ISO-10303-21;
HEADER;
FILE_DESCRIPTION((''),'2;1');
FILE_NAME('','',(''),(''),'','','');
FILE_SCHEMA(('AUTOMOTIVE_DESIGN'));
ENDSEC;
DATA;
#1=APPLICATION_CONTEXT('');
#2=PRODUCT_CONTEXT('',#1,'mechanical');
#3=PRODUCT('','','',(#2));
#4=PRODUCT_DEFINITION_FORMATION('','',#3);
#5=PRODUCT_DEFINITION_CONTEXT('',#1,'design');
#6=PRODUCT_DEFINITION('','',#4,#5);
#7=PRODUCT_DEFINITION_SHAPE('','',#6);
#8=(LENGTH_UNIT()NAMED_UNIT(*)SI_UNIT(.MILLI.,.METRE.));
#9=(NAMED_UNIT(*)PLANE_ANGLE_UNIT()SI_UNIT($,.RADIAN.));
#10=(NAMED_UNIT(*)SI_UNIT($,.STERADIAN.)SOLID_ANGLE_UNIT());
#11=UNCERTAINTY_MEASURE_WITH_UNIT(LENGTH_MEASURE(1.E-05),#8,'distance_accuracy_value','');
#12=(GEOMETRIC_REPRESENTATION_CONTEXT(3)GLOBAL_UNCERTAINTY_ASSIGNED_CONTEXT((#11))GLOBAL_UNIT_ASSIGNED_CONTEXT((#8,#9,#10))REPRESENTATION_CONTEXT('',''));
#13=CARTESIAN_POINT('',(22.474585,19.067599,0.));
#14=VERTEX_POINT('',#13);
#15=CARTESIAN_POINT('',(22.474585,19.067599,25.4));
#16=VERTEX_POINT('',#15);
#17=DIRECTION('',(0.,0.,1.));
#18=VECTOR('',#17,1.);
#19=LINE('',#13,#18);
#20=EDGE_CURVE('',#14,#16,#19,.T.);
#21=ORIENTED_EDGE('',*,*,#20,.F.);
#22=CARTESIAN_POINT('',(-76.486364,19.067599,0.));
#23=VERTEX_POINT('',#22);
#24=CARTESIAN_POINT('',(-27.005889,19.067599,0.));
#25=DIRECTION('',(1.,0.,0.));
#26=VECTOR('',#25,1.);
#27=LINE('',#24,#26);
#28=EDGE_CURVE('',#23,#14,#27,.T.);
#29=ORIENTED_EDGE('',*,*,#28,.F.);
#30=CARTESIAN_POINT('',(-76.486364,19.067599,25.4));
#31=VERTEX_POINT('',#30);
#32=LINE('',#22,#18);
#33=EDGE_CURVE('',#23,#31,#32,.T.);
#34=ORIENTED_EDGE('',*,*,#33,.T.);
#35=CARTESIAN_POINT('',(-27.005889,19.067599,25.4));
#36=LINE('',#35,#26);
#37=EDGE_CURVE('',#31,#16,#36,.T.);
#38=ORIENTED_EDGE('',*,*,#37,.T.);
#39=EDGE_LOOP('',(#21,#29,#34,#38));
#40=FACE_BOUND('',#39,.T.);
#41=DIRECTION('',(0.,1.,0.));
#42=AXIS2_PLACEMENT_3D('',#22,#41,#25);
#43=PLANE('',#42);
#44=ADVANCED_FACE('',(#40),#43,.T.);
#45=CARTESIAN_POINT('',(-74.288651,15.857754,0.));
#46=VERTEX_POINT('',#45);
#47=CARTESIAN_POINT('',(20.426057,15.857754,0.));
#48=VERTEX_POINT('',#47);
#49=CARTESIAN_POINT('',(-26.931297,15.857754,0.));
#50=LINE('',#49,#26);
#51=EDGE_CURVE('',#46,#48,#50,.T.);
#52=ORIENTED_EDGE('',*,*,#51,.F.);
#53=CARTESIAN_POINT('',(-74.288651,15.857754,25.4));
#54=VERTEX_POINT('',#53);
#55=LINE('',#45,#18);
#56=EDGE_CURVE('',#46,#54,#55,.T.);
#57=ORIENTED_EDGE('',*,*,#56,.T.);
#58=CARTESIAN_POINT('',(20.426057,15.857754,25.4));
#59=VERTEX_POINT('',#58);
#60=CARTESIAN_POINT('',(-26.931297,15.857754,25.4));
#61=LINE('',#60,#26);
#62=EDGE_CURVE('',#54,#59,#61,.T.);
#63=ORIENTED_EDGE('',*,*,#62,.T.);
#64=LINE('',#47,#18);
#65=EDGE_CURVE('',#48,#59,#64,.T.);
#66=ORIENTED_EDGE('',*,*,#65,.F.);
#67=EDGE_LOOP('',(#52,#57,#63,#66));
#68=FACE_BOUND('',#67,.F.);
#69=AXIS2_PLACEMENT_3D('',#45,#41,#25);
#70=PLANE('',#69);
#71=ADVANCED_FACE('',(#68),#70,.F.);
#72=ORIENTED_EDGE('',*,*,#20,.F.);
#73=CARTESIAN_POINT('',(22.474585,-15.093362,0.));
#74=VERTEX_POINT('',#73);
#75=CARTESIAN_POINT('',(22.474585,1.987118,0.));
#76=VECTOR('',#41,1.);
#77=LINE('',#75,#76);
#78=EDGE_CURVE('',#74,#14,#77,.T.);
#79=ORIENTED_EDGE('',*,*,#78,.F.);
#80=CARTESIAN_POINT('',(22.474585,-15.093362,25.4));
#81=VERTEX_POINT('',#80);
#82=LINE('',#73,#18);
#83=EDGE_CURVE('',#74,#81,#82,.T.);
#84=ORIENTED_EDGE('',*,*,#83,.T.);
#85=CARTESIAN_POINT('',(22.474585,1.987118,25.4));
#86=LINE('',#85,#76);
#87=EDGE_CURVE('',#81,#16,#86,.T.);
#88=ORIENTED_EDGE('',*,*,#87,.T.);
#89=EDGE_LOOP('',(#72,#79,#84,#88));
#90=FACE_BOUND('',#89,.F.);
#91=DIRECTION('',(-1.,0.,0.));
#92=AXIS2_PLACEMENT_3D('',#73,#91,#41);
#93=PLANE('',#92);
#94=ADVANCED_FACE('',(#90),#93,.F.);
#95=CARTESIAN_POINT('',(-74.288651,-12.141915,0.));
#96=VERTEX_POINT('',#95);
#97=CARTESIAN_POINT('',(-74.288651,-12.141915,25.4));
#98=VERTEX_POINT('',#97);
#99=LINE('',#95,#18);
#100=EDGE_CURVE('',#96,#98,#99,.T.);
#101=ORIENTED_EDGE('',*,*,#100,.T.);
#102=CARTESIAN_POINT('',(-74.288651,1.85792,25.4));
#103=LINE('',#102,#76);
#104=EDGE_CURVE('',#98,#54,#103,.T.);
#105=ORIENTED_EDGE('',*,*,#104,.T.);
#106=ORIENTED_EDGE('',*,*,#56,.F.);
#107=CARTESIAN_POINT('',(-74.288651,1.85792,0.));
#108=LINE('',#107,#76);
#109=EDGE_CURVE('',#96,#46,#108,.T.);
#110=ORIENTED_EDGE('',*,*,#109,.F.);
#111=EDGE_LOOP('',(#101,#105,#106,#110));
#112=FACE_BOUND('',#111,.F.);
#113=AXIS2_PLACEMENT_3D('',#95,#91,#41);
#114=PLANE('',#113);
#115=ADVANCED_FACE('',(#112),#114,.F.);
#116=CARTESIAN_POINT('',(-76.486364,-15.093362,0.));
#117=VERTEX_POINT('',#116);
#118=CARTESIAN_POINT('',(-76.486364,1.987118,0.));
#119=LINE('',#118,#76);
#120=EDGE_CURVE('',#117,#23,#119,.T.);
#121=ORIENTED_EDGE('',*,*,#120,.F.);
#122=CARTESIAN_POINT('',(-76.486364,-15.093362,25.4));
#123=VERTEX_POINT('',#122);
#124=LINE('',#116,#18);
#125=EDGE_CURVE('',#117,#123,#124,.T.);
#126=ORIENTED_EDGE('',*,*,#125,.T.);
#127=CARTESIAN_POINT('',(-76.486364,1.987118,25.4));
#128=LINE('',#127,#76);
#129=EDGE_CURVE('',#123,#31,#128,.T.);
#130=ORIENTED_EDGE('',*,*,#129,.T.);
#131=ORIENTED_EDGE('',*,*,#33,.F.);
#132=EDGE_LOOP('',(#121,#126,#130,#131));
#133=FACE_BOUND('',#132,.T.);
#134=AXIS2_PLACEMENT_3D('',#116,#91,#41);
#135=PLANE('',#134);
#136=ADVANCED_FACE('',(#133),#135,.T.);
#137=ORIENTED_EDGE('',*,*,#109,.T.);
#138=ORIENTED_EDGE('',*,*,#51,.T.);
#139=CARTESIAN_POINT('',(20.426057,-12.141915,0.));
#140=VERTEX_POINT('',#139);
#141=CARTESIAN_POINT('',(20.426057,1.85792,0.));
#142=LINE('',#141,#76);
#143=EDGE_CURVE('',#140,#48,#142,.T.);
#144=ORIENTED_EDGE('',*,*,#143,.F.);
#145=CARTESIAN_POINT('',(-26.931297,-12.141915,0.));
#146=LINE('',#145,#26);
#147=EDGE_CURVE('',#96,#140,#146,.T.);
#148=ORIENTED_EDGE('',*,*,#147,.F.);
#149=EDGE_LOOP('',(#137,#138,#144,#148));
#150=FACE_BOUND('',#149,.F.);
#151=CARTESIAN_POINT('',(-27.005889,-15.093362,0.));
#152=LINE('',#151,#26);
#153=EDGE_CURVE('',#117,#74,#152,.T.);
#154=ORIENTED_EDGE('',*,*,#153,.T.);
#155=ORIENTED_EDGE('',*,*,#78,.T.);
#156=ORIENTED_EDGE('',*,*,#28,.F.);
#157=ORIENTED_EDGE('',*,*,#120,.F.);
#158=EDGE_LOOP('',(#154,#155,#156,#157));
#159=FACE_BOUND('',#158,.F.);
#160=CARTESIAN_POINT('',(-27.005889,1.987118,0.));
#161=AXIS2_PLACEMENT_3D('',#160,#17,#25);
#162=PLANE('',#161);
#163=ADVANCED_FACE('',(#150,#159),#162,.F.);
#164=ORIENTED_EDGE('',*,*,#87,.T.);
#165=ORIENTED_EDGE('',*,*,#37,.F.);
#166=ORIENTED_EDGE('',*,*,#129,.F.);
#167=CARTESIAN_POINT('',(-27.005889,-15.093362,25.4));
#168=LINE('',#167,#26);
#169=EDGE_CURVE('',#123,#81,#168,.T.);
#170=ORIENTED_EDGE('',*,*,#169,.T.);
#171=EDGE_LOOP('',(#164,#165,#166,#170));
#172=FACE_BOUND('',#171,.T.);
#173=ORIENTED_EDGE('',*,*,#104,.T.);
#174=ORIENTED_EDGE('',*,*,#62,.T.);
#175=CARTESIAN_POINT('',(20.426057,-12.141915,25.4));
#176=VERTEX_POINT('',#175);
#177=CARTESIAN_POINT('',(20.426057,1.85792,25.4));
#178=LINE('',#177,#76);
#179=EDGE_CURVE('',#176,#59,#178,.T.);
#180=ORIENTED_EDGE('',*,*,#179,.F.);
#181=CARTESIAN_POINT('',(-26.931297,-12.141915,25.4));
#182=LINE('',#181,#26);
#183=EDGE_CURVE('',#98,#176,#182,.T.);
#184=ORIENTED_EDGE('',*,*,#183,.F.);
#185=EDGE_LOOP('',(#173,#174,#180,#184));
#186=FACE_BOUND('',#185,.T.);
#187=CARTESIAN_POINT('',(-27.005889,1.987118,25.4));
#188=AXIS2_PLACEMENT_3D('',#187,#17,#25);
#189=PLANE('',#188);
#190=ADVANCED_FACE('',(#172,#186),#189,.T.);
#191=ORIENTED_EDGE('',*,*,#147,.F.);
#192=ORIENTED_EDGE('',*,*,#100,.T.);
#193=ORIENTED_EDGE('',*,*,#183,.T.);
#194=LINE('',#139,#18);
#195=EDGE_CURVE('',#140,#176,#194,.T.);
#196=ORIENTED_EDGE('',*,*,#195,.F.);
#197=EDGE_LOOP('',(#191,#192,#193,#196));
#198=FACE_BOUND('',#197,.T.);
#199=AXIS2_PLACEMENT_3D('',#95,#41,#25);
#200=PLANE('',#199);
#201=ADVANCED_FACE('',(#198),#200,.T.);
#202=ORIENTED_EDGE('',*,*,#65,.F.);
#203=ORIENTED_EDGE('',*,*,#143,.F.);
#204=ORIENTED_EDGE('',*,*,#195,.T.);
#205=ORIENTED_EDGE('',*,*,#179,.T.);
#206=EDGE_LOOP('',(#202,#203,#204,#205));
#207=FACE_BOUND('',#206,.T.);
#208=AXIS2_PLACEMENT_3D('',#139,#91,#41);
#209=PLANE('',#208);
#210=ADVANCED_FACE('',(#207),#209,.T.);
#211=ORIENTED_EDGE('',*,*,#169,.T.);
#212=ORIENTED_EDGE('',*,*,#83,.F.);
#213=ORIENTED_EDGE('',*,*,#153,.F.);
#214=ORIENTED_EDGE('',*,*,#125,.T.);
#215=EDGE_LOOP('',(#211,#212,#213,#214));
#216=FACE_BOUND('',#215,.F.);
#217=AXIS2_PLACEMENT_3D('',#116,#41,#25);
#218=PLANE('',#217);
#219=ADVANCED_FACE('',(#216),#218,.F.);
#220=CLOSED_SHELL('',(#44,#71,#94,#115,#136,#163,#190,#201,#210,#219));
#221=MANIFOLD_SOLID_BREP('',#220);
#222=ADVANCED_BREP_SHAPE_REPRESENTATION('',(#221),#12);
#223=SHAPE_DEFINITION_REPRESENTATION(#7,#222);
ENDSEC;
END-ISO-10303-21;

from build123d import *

# Parameters (mm, degrees)
F0_W     = 98.960949108
F0_H     = 34.1609604657
F0_W_2   = 94.7147086263
F0_H_2   = 27.9996693134
F1_DEPTH = 25.4


# Not quite as in the source:
# - a feature names something its author has since deleted; it is built from what else it names


with BuildPart() as f1:
    # F0 (on Top) → F1 (new body)
    with BuildSketch(Plane.XY):
        with Locations((-27.005889453, 1.987118274)):
            Rectangle(F0_W, F0_H)
        with Locations((-26.931297034, 1.8579196185)):
            Rectangle(F0_W_2, F0_H_2, mode=Mode.SUBTRACT)
    extrude(amount=F1_DEPTH)


solid = f1.part
